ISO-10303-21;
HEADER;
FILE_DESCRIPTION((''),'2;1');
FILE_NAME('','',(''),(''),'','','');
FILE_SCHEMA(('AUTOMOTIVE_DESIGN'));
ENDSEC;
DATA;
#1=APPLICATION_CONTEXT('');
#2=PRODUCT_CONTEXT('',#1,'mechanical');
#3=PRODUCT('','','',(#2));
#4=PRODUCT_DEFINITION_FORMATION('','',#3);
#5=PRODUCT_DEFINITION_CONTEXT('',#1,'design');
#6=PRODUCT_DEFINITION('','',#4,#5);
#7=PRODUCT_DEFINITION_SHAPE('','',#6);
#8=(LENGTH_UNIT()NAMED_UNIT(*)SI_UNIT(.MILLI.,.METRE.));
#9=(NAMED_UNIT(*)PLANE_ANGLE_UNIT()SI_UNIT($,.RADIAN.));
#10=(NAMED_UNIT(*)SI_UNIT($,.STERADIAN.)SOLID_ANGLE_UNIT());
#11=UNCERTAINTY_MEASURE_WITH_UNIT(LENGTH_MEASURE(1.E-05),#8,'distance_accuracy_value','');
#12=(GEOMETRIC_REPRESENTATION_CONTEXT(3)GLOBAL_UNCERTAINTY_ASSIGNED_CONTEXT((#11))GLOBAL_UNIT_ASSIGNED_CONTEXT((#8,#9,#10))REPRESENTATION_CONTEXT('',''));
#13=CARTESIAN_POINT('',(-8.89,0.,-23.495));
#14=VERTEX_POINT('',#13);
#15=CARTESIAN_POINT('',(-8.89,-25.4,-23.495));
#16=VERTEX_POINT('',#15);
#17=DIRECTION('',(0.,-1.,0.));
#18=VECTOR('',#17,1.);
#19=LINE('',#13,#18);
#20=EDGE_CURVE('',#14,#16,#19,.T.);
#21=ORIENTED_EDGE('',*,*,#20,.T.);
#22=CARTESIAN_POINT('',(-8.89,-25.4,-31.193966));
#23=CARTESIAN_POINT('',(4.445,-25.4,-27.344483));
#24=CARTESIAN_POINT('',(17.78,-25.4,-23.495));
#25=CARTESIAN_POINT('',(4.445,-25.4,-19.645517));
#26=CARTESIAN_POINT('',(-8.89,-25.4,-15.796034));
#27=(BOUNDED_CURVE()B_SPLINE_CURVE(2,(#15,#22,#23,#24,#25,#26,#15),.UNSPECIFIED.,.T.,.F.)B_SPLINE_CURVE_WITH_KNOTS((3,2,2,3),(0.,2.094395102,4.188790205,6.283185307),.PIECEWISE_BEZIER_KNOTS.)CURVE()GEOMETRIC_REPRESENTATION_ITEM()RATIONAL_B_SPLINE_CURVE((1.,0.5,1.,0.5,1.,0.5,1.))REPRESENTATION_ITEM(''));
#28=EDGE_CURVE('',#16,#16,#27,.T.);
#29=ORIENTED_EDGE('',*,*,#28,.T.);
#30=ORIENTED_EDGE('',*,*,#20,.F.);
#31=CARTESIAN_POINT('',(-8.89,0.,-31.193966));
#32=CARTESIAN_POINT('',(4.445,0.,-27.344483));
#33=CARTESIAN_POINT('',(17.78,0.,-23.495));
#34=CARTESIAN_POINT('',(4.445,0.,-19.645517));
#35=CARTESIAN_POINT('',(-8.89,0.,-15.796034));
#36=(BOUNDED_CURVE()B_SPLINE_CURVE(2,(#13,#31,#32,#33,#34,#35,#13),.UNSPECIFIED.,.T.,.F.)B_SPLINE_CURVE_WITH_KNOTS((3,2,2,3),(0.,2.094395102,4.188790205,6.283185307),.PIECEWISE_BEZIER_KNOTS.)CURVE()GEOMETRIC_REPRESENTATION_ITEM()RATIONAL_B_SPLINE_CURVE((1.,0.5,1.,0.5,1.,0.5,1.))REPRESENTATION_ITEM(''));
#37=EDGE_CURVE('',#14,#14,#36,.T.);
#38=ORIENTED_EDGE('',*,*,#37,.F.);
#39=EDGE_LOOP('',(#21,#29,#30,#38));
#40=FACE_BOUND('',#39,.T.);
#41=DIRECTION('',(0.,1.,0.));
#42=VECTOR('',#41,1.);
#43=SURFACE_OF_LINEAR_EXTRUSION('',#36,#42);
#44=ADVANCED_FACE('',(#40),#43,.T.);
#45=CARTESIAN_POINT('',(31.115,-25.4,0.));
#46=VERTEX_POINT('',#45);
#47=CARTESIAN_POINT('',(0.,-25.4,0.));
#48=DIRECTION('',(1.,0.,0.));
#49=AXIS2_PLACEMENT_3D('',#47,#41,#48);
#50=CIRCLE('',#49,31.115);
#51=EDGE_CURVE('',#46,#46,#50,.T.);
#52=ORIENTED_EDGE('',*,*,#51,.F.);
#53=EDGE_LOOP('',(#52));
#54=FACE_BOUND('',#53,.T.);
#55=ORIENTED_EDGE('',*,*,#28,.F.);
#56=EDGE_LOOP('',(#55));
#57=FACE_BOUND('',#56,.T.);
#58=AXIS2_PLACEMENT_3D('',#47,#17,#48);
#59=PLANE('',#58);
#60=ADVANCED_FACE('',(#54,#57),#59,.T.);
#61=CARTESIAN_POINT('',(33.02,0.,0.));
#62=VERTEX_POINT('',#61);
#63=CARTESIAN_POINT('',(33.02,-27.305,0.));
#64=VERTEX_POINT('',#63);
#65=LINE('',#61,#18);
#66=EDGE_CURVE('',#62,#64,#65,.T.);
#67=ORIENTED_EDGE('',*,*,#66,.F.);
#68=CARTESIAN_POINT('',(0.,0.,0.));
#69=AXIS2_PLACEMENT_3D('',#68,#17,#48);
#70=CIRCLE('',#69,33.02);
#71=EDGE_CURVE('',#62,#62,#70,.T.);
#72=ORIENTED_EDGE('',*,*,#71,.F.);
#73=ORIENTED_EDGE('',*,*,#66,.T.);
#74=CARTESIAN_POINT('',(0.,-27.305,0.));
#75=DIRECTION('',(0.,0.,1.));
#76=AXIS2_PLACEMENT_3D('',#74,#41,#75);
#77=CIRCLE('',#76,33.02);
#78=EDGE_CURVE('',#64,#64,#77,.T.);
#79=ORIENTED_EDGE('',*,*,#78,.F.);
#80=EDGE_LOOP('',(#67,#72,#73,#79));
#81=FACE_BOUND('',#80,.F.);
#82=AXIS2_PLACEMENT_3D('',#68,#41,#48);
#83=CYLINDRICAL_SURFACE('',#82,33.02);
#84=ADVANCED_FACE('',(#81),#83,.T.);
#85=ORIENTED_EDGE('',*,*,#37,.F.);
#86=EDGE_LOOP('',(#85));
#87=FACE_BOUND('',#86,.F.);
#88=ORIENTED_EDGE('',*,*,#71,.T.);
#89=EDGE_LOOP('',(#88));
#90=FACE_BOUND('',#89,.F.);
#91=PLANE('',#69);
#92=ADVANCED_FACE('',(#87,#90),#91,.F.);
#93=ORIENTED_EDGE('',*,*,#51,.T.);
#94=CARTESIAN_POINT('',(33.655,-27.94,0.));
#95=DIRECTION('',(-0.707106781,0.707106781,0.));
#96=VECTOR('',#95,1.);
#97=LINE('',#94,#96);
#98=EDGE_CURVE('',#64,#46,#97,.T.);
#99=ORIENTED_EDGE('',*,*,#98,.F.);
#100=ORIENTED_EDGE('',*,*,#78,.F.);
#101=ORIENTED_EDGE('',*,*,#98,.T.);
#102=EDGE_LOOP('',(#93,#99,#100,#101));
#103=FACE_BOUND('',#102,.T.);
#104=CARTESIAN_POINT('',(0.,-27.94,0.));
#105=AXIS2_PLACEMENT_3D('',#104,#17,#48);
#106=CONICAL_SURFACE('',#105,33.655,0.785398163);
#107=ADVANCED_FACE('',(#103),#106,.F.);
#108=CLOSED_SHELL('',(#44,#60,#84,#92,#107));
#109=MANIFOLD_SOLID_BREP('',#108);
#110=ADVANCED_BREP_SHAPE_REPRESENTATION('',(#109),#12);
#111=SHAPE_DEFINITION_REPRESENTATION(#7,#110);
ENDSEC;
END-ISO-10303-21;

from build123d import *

# Parameters (mm, degrees)
F0_R     = 33.02
F0_R_2   = 28.575
F1_DEPTH = 27.94
F2_DEPTH = 25.4


# Not quite as in the source:
# - a fillet or chamfer that OpenCascade refuses, or shapes differently, is made with other operations: its cross-section is extruded or revolved along the edge and cut away or added


with BuildPart() as f1:
    # F0 (on Front) → F1 (new body)
    with BuildSketch(Plane.XZ):
        Circle(F0_R)
        Circle(F0_R_2, mode=Mode.SUBTRACT)
    extrude(amount=F1_DEPTH)

    # F0 (on Front) → F2 (join)
    with BuildSketch(Plane.XZ):
        Circle(F0_R_2)
        with BuildLine():
            add(Edge.make_bspline(
                [(-8.89, -23.495), (-8.89, -31.1939658396), (4.445, -27.3444829198), (17.78, -23.495), (4.445, -19.6455170802), (-8.89, -15.7960341604), (-8.89, -23.495)],
                knots=[0, 0, 0, 2.0943951024, 2.0943951024, 4.1887902048, 4.1887902048, 6.2831853072, 6.2831853072, 6.2831853072], degree=2, weights=[1, 0.5, 1, 0.5, 1, 0.5, 1]))
        make_face(mode=Mode.SUBTRACT)
    extrude(amount=F2_DEPTH)

    # F3: chamfer of 5.08 on 1 edges, made by hand


with BuildPart() as f3_tool2:
    # F3_s3 → F3_t4 (revolve)
    with BuildSketch(Plane.XY):
        Polygon((33.655, -27.94), (28.575, -22.86), (28.575, -27.94), align=None)
    revolve(axis=Axis((0, -27.94, 0), (0, -1, 0)))

    split(bisect_by=Plane.XZ.offset(25.4), keep=Keep.TOP)


with BuildPart() as f1_1:
    add(f1.part)

    # F3_t1: cut F3_tool2
    add(f3_tool2.part, mode=Mode.SUBTRACT)


solid = f1_1.part
